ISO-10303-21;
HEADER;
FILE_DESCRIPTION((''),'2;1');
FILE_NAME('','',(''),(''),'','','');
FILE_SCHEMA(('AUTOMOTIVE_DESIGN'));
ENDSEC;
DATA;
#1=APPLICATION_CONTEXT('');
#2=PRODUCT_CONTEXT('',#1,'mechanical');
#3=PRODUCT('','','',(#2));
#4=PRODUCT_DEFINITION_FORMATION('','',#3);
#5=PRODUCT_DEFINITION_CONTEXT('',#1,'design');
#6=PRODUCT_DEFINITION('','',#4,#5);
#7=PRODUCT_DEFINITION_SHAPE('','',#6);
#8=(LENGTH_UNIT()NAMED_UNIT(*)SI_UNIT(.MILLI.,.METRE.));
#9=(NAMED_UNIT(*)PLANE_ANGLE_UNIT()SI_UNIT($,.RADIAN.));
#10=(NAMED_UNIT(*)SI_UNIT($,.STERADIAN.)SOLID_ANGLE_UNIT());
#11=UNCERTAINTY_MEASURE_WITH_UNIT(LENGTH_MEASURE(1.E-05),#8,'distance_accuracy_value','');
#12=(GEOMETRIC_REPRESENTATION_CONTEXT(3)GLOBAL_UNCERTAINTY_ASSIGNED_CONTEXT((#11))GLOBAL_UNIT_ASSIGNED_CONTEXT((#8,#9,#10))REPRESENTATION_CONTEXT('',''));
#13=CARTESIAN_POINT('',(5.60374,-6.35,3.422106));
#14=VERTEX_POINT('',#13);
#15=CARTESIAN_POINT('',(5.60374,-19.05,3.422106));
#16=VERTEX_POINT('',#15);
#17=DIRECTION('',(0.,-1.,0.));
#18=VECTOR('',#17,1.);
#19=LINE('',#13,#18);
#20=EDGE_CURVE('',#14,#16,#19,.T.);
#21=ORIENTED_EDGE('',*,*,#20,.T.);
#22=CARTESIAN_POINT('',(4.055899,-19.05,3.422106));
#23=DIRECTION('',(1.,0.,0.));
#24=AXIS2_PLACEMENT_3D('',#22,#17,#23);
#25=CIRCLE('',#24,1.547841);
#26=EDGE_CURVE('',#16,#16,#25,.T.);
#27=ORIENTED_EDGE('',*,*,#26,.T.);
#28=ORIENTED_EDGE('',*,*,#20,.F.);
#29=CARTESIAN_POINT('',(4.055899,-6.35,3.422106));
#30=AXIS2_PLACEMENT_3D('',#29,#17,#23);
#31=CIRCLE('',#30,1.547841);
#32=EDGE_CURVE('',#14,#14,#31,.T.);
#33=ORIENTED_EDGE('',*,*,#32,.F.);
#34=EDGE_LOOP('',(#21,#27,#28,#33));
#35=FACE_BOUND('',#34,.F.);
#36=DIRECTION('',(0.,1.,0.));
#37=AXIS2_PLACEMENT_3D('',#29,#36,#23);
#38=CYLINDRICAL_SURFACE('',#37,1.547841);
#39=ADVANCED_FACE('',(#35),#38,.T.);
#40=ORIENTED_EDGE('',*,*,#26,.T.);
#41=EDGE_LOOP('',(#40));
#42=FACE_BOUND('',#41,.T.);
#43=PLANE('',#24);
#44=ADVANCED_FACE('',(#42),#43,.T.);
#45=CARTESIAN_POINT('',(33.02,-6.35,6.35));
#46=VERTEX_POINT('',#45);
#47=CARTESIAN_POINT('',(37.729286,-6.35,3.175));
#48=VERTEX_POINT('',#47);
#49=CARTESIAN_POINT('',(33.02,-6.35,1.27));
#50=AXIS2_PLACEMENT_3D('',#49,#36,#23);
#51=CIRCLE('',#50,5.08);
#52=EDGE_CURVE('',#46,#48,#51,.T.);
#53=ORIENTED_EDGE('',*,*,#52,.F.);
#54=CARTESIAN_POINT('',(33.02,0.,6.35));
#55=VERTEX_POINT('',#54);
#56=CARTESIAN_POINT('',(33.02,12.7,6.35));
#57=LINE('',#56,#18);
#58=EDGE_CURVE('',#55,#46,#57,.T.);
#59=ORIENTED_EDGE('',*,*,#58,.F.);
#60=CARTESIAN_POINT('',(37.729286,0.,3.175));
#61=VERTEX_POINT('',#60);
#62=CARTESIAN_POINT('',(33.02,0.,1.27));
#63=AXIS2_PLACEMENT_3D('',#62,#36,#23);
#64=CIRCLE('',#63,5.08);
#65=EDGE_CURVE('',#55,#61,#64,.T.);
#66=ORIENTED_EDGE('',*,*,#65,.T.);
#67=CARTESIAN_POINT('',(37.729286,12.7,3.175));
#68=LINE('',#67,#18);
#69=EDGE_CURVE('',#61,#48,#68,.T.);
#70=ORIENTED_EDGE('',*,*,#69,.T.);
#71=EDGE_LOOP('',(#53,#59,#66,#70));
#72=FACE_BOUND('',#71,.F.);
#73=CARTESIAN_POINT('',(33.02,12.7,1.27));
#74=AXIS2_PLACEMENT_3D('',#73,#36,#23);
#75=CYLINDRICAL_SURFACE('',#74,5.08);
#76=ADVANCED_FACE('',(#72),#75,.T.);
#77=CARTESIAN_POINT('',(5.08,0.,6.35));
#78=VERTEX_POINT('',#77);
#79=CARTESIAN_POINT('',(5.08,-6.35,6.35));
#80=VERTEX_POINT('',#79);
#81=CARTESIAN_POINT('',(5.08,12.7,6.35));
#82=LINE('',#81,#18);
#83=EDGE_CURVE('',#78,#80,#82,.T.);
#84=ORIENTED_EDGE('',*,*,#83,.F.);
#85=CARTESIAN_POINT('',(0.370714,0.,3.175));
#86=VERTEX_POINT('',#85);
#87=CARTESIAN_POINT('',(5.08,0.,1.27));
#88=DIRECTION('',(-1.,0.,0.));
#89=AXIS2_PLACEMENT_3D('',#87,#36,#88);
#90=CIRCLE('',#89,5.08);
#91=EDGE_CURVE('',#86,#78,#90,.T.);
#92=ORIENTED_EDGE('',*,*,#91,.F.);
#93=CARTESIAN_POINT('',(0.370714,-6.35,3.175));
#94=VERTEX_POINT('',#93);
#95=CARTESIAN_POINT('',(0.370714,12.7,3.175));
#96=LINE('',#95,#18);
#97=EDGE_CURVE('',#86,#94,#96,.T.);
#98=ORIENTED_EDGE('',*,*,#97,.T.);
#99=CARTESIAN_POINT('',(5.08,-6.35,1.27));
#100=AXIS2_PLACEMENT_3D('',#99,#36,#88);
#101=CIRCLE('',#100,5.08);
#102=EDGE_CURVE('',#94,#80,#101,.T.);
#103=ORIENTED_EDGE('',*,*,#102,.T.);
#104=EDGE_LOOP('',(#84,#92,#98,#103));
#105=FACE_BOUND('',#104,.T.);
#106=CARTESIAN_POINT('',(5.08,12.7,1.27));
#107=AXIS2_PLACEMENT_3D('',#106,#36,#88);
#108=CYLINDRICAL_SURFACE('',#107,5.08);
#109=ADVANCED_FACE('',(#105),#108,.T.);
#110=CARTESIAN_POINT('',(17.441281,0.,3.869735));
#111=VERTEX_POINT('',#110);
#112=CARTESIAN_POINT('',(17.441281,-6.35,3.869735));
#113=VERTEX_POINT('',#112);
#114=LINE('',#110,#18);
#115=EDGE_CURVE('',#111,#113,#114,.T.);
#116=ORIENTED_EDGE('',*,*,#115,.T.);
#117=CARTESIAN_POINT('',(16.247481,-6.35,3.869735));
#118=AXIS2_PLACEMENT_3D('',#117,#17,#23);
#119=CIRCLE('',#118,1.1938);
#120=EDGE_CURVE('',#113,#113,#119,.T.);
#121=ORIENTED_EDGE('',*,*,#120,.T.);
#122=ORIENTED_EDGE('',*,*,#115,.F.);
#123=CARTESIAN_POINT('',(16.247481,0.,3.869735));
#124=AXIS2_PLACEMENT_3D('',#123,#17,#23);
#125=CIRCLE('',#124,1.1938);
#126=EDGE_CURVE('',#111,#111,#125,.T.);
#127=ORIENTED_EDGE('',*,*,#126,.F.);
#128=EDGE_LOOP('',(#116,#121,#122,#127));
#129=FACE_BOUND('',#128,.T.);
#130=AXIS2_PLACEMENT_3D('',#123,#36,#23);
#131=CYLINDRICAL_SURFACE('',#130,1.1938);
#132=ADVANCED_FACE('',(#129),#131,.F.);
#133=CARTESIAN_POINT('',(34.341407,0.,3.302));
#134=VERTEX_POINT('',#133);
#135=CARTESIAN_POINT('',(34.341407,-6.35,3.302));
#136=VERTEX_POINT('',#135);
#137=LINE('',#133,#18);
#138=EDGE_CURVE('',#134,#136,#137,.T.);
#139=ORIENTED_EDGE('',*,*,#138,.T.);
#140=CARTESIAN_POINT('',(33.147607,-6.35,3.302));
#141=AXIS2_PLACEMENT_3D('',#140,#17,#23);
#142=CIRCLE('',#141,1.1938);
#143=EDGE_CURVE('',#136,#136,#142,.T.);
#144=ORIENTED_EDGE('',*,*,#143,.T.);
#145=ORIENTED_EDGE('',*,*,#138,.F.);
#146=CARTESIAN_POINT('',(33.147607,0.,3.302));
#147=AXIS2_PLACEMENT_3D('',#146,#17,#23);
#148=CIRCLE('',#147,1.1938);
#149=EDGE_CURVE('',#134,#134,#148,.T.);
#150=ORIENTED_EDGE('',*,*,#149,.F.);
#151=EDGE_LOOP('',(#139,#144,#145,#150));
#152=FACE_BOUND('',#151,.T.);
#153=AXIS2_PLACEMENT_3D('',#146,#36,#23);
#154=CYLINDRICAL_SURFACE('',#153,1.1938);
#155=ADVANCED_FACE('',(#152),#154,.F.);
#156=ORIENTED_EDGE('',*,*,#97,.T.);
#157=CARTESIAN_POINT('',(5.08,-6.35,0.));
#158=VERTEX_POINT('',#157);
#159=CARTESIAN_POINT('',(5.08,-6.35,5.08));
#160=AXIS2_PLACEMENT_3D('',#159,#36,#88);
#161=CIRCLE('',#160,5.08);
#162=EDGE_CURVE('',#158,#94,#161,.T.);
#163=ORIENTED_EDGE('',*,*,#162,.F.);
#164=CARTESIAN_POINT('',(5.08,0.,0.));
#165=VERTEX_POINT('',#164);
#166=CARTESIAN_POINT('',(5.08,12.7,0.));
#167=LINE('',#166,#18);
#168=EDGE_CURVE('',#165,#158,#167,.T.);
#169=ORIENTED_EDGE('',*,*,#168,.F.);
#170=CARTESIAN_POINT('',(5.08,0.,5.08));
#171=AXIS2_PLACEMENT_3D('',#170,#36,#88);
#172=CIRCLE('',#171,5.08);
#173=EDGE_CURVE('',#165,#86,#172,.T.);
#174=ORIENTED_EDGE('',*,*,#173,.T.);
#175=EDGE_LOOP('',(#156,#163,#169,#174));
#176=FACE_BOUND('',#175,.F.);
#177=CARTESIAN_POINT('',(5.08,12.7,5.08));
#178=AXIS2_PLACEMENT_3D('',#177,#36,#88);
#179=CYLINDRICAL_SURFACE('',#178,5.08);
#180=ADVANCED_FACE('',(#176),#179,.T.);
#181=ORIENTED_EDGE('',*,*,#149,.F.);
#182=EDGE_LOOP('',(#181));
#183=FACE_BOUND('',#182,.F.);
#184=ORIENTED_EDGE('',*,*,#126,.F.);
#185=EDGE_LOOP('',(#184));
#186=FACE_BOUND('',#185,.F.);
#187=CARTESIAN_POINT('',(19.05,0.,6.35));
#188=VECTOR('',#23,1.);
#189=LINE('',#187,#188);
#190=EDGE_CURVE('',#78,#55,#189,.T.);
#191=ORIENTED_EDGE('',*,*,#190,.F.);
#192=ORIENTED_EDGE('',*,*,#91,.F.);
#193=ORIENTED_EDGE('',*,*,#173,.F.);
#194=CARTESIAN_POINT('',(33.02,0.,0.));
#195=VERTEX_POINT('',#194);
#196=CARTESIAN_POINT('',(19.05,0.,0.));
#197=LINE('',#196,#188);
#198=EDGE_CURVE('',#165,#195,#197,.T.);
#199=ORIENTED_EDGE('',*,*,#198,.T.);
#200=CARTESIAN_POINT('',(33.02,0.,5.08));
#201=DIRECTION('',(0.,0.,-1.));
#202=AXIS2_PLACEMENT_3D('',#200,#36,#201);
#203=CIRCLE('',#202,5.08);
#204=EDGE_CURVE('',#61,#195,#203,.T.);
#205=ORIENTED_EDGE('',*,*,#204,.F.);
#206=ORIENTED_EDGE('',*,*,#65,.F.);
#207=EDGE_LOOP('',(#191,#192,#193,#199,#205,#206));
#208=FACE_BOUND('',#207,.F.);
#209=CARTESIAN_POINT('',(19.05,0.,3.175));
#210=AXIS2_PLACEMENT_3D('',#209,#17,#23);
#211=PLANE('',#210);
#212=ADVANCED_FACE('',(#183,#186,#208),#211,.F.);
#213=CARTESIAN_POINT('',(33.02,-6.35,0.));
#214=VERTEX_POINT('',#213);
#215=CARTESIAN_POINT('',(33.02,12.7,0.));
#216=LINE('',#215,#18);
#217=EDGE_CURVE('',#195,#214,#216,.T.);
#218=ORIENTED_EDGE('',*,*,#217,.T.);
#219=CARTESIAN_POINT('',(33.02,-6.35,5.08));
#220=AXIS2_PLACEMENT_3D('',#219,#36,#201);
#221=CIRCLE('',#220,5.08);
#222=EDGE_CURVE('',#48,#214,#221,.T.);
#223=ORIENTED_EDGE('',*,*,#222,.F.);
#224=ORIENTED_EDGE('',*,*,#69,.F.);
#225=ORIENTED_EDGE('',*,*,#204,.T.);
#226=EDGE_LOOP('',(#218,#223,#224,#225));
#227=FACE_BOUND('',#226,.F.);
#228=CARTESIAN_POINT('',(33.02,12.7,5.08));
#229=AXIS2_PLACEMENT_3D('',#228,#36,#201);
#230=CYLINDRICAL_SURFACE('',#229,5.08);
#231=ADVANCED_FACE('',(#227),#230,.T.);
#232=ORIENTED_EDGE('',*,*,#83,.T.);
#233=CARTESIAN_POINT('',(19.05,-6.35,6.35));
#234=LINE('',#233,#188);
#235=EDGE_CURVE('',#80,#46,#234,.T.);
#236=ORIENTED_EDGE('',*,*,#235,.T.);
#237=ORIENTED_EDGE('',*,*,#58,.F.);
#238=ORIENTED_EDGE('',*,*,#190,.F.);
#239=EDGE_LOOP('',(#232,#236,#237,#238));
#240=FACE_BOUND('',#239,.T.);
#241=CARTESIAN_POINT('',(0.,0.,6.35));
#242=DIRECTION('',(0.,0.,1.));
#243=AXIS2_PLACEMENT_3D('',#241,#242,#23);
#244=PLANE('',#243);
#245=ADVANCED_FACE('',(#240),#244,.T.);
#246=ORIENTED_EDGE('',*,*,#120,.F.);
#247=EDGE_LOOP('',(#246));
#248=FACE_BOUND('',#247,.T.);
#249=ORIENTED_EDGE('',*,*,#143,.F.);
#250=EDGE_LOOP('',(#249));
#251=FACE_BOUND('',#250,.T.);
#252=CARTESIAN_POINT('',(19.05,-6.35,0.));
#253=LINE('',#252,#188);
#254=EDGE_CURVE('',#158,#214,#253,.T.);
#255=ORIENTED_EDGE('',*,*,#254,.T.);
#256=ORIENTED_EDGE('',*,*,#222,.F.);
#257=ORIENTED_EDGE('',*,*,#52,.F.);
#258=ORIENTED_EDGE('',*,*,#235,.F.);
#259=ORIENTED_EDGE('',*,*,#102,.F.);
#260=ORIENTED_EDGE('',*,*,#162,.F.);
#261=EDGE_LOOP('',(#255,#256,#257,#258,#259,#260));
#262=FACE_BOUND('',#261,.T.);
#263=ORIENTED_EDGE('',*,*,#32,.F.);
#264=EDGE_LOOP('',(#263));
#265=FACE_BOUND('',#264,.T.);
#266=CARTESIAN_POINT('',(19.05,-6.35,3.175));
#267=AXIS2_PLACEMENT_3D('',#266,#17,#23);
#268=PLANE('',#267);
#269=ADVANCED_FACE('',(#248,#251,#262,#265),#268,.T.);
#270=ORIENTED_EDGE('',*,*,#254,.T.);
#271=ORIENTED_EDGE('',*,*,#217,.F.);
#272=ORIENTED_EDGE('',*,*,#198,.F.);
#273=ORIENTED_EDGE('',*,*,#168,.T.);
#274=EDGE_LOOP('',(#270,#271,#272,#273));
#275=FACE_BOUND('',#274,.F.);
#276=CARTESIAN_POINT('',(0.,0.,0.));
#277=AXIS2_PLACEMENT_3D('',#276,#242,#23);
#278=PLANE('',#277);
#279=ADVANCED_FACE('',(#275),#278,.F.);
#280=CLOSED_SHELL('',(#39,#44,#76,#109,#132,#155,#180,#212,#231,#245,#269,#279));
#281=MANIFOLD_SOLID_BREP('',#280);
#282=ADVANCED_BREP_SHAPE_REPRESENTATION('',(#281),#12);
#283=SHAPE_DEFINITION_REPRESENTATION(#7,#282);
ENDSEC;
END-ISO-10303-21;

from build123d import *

# Parameters (mm, degrees)
F0_W        = 38.1
F0_H        = 6.35
F0_R        = 1.1938
F1_DEPTH    = 6.35
F2_T1_DEPTH = 31.75
F3_R        = 1.547841459
F4_DEPTH    = 12.7


# Not quite as in the source:
# - a fillet or chamfer that OpenCascade refuses, or shapes differently, is made with other operations: its cross-section is extruded or revolved along the edge and cut away or added


with BuildPart() as f1:
    # F0 (on Front) → F1 (new body)
    with BuildSketch(Plane.XZ):
        with Locations((19.05, 3.175)):
            Rectangle(F0_W, F0_H)
        with Locations((16.2474811077, 3.8697349373)):
            Circle(F0_R, mode=Mode.SUBTRACT)
        with Locations((33.1476069987, 3.302)):
            Circle(F0_R, mode=Mode.SUBTRACT)
    extrude(amount=F1_DEPTH)

    # F2: fillet of radius 5.08 on 4 edges, made by hand

    # F2_s2 → F2_t1 (cut)
    with BuildSketch(Plane.XZ.offset(-12.7)):
        with BuildLine():
            ThreePointArc((0, 1.27), (1.4878975516, 4.8621024484), (5.08, 6.35))
            Line((5.08, 6.35), (0, 6.35))
            Line((0, 6.35), (0, 1.27))
        make_face()
        with BuildLine():
            ThreePointArc((0, 5.08), (1.4878975516, 1.4878975516), (5.08, 0))
            Line((5.08, 0), (0, 0))
            Line((0, 0), (0, 5.08))
        make_face()
        with BuildLine():
            ThreePointArc((38.1, 1.27), (36.6121024484, 4.8621024484), (33.02, 6.35))
            Line((33.02, 6.35), (38.1, 6.35))
            Line((38.1, 6.35), (38.1, 1.27))
        make_face()
        with BuildLine():
            ThreePointArc((33.02, 0), (36.6121024484, 1.4878975516), (38.1, 5.08))
            Line((38.1, 5.08), (38.1, 0))
            Line((38.1, 0), (33.02, 0))
        make_face()
    extrude(amount=F2_T1_DEPTH, mode=Mode.SUBTRACT)

    # F3 (on face) → F4 (join)
    with BuildSketch(Plane.XZ.offset(6.35)):
        with Locations((4.0558986366, 3.4221061505)):
            Circle(F3_R)
    extrude(amount=F4_DEPTH)


solid = f1.part
